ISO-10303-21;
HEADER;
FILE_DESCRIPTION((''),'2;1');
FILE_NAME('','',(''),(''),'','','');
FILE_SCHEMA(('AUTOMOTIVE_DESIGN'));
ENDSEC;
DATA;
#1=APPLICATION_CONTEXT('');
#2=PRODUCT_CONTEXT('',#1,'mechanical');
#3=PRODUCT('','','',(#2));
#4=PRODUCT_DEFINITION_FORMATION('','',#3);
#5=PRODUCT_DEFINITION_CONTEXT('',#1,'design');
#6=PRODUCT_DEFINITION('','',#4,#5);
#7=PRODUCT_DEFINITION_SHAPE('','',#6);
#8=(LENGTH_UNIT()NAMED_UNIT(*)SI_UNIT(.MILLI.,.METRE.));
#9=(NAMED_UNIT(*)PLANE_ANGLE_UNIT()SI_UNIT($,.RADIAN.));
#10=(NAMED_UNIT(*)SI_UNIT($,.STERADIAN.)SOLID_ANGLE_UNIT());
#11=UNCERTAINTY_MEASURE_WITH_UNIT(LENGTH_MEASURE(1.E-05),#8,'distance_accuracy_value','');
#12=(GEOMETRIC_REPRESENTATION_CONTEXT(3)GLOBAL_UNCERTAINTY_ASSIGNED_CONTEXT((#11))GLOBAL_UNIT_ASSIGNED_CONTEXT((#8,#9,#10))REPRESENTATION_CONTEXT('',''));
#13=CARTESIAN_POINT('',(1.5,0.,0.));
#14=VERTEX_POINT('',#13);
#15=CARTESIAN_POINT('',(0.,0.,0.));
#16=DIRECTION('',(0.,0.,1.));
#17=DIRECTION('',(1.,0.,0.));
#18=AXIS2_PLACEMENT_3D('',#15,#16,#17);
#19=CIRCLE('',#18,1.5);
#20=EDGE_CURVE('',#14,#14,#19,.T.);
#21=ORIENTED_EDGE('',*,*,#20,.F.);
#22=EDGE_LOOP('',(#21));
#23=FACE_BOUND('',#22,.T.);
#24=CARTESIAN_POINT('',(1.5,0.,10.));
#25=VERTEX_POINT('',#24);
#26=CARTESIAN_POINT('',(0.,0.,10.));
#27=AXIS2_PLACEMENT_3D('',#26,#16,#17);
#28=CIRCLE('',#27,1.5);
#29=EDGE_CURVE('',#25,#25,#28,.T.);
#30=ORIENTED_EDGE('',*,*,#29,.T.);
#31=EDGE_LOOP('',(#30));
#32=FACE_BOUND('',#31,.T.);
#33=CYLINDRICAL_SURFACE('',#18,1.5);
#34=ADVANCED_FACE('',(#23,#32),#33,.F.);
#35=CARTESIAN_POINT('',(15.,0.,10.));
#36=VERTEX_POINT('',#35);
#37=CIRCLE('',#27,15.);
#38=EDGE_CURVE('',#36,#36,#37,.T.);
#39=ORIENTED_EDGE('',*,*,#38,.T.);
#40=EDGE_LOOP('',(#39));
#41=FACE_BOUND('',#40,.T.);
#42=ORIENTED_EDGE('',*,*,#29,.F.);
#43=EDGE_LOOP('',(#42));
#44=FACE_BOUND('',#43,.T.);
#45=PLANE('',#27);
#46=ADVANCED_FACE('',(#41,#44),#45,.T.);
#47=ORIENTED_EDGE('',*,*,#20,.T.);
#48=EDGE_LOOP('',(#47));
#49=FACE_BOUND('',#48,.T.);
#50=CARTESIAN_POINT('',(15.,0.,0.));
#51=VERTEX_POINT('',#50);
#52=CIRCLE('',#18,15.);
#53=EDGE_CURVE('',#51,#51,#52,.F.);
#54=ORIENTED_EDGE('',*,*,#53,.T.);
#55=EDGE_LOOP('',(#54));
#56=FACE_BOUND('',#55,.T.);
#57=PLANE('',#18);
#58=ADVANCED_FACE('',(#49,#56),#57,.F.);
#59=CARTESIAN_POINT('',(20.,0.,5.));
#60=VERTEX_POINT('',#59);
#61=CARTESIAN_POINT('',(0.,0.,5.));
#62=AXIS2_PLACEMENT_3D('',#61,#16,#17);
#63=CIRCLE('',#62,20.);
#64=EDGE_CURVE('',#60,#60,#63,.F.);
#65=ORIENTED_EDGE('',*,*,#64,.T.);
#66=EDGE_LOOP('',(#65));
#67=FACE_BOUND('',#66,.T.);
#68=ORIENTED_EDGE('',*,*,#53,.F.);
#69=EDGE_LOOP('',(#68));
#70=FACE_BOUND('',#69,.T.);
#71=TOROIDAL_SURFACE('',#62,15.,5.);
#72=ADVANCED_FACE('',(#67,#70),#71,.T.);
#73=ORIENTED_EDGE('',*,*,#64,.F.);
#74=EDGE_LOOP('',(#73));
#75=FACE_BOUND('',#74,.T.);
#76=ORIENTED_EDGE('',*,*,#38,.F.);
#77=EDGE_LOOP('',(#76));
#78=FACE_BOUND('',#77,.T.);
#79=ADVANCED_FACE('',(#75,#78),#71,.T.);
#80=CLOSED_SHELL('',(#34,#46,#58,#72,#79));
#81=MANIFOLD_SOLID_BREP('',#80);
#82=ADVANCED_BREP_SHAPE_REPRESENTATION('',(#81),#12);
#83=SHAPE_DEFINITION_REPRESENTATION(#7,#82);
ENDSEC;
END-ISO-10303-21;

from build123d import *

# Parameters (mm, degrees)
SKETCH1_R           = 20
BOSS_EXTRUDE1_DEPTH = 10
FILLET1_R           = 5
FILLET2_R           = 5
SKETCH2_R           = 1.5
CUT_EXTRUDE1_DEPTH  = 31.000000133


with BuildPart() as part:
    # Sketch1 → Boss-Extrude1 (new body)
    with BuildSketch(Plane.XY):
        Circle(SKETCH1_R)
    extrude(amount=BOSS_EXTRUDE1_DEPTH)

    # Fillet1
    fillet1_edges = [part.edges().sort_by_distance(p)[0] for p in [
        (-20, 0, 10),
    ]]
    fillet(fillet1_edges, radius=FILLET1_R)

    # Fillet2
    fillet2_edges = [part.edges().sort_by_distance(p)[0] for p in [
        (-20, 0, 0),
    ]]
    fillet(fillet2_edges, radius=FILLET2_R - 0.0001)  # a hair under: the kernel refuses the full size

    # Sketch2 → Cut-Extrude1 (cut, through all)
    with BuildSketch(Plane.XY.offset(10)):
        Circle(SKETCH2_R)
    extrude(amount=-CUT_EXTRUDE1_DEPTH, mode=Mode.SUBTRACT)


solid = part.part
